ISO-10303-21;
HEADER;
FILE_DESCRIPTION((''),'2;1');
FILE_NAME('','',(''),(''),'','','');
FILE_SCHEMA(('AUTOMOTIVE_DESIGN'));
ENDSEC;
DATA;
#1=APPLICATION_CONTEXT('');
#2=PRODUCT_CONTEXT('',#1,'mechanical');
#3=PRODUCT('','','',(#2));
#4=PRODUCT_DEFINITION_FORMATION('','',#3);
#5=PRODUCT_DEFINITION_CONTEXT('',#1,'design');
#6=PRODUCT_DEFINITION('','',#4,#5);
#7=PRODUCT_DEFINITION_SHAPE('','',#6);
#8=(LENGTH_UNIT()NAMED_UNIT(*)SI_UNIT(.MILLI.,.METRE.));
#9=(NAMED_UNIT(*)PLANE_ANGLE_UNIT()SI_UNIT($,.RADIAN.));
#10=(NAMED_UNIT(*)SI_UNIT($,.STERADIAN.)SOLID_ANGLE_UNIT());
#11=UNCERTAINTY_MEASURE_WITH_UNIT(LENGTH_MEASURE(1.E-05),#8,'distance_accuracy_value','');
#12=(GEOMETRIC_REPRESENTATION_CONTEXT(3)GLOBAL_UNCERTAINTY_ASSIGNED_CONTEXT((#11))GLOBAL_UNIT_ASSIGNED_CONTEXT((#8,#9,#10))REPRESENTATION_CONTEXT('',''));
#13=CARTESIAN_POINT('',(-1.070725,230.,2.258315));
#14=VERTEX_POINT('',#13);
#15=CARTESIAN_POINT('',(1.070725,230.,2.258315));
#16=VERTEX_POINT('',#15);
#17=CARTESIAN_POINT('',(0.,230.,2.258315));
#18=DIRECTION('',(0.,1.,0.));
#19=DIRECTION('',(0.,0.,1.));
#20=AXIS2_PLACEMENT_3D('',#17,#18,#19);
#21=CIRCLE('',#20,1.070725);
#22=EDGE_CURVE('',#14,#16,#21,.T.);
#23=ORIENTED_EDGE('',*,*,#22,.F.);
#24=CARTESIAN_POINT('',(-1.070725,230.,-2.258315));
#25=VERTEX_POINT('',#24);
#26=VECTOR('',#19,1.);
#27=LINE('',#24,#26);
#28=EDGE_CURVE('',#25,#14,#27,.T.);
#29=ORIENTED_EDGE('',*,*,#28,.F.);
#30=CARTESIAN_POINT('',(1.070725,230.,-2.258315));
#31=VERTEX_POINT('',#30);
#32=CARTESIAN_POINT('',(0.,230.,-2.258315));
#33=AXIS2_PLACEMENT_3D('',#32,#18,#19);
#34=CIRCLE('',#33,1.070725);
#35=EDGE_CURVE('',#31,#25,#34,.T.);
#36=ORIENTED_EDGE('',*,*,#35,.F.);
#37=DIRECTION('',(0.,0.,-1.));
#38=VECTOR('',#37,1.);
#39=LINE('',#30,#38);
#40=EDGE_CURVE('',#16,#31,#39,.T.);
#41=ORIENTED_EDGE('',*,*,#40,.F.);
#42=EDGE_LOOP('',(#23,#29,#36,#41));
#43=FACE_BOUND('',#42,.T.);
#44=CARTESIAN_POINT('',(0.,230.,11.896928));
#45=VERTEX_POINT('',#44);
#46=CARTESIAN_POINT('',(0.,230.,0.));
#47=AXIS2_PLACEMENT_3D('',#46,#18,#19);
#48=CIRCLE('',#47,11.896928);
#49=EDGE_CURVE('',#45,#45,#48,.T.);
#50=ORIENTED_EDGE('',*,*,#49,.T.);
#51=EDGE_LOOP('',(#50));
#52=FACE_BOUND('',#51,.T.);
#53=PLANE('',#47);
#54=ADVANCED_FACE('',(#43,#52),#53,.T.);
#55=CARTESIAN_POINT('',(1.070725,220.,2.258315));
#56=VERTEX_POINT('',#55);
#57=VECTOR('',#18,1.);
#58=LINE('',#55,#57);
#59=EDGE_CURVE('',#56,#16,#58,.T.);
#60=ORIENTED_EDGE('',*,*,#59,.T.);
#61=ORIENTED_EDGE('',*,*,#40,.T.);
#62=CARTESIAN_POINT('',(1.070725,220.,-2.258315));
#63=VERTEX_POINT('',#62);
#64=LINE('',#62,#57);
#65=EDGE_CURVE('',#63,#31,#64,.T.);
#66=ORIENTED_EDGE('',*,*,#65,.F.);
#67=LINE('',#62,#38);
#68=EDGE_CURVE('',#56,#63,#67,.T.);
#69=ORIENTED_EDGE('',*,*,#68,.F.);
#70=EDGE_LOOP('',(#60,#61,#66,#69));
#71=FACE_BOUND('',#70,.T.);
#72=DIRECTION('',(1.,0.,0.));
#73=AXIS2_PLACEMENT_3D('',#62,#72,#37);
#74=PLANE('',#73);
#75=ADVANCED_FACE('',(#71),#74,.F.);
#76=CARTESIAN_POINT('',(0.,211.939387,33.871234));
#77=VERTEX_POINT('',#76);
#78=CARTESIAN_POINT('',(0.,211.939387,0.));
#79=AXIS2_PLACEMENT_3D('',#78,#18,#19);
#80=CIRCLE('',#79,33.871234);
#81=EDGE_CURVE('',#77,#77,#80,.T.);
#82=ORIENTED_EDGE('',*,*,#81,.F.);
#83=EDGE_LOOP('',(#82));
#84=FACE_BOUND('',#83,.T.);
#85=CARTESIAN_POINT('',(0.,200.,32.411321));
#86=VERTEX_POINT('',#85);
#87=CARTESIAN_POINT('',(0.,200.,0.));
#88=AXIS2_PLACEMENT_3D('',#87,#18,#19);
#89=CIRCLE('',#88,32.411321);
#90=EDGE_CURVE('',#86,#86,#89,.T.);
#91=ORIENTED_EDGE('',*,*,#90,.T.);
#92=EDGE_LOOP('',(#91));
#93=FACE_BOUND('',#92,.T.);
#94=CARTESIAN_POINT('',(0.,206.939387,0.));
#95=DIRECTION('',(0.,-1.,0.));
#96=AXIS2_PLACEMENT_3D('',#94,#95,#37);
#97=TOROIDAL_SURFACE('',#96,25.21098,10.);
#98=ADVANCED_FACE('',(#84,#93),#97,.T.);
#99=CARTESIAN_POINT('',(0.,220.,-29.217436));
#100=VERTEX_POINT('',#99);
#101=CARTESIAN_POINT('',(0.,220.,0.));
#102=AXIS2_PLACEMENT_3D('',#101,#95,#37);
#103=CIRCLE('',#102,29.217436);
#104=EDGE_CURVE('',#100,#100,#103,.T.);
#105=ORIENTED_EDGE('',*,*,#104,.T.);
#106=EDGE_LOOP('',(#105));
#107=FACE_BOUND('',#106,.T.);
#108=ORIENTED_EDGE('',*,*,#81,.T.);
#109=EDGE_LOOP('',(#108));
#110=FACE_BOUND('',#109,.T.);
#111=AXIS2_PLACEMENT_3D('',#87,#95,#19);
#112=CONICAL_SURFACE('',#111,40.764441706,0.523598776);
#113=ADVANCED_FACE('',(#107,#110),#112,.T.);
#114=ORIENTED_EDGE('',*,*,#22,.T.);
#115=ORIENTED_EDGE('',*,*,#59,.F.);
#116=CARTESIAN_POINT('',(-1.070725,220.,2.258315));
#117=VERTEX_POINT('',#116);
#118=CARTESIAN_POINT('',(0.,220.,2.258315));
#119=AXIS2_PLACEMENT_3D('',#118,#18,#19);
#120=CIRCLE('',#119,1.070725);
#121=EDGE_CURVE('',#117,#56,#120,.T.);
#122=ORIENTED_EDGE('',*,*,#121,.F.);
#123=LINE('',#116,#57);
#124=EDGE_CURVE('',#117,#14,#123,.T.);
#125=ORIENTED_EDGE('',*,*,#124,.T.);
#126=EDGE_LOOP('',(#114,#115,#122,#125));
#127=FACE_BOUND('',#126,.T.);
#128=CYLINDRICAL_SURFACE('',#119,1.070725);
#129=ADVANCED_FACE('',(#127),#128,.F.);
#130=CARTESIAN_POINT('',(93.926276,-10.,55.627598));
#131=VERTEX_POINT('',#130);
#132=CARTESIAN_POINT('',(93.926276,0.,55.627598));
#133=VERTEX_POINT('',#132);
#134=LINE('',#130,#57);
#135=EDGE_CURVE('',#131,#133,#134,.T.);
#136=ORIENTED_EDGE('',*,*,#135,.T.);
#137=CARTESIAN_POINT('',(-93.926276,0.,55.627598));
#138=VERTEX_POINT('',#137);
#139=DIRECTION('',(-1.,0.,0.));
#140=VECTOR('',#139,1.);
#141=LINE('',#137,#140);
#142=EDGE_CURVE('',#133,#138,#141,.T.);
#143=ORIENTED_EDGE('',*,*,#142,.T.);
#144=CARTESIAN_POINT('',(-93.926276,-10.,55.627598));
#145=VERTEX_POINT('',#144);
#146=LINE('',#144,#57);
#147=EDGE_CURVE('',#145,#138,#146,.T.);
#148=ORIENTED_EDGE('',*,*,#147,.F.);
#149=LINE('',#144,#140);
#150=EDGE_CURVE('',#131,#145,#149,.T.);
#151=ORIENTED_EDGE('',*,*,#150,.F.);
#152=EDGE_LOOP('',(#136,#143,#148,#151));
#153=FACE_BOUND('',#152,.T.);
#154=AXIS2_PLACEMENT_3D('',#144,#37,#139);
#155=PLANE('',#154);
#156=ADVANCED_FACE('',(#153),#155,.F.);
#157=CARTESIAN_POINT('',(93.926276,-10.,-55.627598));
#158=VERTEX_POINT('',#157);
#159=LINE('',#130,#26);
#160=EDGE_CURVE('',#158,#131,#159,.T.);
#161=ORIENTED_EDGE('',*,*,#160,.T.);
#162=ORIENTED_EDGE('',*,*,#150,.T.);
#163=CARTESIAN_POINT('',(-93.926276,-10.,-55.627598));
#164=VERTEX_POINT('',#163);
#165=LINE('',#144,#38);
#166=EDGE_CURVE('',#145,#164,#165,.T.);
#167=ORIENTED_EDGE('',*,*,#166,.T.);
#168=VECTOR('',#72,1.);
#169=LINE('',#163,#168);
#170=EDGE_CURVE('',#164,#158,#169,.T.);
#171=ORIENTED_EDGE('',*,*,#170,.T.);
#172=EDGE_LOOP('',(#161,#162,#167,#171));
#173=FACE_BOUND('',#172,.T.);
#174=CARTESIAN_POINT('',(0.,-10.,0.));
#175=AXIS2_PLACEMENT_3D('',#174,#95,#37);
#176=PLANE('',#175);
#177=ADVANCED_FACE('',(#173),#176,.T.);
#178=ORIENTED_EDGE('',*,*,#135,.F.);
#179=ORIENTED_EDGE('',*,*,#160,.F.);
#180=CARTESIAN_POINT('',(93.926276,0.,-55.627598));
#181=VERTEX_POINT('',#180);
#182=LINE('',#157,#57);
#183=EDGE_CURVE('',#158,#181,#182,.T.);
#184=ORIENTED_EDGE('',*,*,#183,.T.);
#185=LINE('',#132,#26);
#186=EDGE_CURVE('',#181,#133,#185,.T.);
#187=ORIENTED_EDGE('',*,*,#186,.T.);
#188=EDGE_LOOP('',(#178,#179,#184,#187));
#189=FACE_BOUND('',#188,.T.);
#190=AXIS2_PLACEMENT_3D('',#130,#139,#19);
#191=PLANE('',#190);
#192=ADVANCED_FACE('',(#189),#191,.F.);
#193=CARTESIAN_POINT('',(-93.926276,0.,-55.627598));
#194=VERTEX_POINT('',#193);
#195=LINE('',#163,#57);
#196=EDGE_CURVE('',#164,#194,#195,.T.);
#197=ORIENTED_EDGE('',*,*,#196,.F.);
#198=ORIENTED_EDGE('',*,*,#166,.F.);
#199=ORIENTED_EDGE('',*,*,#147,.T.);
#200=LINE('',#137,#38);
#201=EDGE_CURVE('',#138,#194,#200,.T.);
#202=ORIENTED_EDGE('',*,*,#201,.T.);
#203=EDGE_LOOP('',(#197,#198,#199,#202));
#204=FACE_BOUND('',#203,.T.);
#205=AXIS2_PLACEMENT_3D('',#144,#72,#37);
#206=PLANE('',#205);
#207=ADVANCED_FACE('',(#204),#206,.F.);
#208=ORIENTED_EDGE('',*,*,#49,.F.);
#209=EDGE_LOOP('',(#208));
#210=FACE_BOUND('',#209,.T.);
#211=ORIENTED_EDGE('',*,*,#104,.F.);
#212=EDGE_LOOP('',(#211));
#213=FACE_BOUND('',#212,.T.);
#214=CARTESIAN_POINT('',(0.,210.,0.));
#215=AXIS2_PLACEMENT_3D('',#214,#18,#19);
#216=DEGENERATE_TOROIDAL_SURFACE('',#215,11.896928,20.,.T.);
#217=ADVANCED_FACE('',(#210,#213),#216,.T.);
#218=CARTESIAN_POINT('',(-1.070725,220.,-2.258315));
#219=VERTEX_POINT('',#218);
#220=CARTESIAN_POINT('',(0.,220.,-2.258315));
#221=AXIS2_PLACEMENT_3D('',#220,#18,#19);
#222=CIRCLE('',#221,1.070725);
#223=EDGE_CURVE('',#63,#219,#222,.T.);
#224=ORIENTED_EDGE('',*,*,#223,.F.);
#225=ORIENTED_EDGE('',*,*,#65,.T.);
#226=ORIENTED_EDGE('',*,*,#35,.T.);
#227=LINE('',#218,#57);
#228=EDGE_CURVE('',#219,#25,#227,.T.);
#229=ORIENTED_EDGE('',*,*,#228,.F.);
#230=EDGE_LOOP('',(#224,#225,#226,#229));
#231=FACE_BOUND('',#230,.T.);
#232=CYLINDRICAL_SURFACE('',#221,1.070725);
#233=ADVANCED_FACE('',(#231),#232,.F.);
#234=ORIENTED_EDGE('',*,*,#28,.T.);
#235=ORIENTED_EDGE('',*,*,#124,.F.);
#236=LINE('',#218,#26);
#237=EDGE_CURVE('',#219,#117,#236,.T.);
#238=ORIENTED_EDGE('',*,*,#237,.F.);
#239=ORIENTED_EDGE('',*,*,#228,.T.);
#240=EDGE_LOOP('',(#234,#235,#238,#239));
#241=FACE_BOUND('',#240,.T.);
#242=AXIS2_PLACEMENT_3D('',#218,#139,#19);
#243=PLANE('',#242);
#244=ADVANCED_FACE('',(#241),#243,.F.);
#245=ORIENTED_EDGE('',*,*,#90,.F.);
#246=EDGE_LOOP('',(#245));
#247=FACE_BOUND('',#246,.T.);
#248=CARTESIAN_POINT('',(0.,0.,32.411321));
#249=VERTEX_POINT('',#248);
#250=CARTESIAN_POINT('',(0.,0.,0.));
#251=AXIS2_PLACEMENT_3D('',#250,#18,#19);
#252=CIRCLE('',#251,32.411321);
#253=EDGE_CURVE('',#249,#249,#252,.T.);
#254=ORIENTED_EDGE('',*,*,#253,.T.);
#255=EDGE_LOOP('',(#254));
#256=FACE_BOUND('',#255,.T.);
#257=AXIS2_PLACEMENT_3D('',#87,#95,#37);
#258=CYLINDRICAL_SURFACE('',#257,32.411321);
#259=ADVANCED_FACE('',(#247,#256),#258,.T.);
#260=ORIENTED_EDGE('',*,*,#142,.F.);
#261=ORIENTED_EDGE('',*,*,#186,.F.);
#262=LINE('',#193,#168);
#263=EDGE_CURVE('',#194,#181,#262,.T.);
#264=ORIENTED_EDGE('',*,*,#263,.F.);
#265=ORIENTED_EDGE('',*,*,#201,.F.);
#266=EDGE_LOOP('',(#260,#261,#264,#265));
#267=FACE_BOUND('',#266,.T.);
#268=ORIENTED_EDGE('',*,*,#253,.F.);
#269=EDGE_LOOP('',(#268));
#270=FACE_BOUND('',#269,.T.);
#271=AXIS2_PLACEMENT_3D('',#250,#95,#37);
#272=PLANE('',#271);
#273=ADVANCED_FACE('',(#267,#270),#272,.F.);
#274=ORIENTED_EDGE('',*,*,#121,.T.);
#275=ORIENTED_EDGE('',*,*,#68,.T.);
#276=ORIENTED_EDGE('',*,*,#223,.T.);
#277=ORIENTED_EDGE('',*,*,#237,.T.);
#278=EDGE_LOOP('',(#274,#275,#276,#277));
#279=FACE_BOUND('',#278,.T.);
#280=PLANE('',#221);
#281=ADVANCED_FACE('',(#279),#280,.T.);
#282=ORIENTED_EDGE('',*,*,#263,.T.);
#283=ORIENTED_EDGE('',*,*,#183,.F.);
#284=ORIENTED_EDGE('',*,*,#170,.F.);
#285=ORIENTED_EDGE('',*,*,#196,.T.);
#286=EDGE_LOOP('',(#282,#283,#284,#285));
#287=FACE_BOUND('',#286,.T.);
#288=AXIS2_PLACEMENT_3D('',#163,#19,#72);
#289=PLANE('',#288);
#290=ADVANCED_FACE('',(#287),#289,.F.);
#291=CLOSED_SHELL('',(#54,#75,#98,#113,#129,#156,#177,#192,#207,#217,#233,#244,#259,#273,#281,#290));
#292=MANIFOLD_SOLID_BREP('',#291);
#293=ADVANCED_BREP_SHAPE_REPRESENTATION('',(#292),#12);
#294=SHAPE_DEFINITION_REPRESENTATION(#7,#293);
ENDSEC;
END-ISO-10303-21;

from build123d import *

# Parameters (mm, degrees)
SKETCH2_R           = 32.411320863
BOSS_EXTRUDE1_DEPTH = 200
SKETCH3_R           = 40.764441706
BOSS_EXTRUDE2_DEPTH = 30
BOSS_EXTRUDE2_TAPER = 30
FILLET1_R           = 10
FILLET2_R           = 20
CUT_EXTRUDE1_DEPTH  = 10
SKETCH5_W           = 187.852552736
SKETCH5_H           = 111.255195094
BOSS_EXTRUDE3_DEPTH = 10


with BuildPart() as part:
    # Sketch2 → Boss-Extrude1 (new body)
    with BuildSketch(Plane(origin=(0, 0, 0), x_dir=(1, 0, 0), z_dir=(0, 1, 0))):
        with Locations(Location((0, 0, 0), (0, 0, 270))):
            Circle(SKETCH2_R)
    extrude(amount=BOSS_EXTRUDE1_DEPTH)

    # Sketch3 → Boss-Extrude2 (add)
    with BuildSketch(Plane(origin=(0, 200, 0), x_dir=(1, 0, 0), z_dir=(0, 1, 0))):
        Circle(SKETCH3_R)
    extrude(amount=BOSS_EXTRUDE2_DEPTH, taper=BOSS_EXTRUDE2_TAPER)

    # Fillet1
    # the kernel refuses this fillet: 10 mm, written as the material it takes off along each edge
    with BuildSketch(Plane(origin=(0, 200, 0), x_dir=(1, 0, 0), z_dir=(0, 0, 1))) as fillet1_piece_1:
        with BuildLine():
            CenterArc((25.210979619, 6.93938657), FILLET1_R, 316.057297886, 73.942702114)
            Line((32.411320863, 0), (32.555327688, -0.138787731))
            ThreePointArc((32.555327688, -0.138787731), (36.587881285, -0.2), (40.764441706, -0.2))
            Line((40.764441706, -0.2), (40.937646787, 0.1))
            Line((40.937646787, 0.1), (34.044438737, 12.03938657))
            Line((34.044438737, 12.03938657), (33.871233656, 11.93938657))
        make_face()
    revolve(axis=Axis((0, 200, 0), (0, 1, 0)), mode=Mode.SUBTRACT)

    # Fillet2
    fillet2_edges = [part.edges().sort_by_distance(p)[0] for p in [
        (-23.443933631, 230, 0),
    ]]
    fillet(fillet2_edges, radius=FILLET2_R)

    # Sketch4 → Cut-Extrude1 (cut)
    with BuildSketch(Plane(origin=(0, 230, 0), x_dir=(1, 0, 0), z_dir=(0, 1, 0))):
        with BuildLine():
            Line((1.070724985, 2.258315279), (1.070724985, -2.258315279))
            ThreePointArc((1.070724985, -2.258315279), (0, -3.329040264), (-1.070724985, -2.258315279))
            Line((-1.070724985, -2.258315279), (-1.070724985, 2.258315279))
            ThreePointArc((-1.070724985, 2.258315279), (0, 3.329040264), (1.070724985, 2.258315279))
        make_face()
    extrude(amount=-CUT_EXTRUDE1_DEPTH, mode=Mode.SUBTRACT)

    # Sketch5 → Boss-Extrude3 (add)
    with BuildSketch(Plane.XZ):
        Rectangle(SKETCH5_W, SKETCH5_H)
    extrude(amount=BOSS_EXTRUDE3_DEPTH)


solid = part.part
